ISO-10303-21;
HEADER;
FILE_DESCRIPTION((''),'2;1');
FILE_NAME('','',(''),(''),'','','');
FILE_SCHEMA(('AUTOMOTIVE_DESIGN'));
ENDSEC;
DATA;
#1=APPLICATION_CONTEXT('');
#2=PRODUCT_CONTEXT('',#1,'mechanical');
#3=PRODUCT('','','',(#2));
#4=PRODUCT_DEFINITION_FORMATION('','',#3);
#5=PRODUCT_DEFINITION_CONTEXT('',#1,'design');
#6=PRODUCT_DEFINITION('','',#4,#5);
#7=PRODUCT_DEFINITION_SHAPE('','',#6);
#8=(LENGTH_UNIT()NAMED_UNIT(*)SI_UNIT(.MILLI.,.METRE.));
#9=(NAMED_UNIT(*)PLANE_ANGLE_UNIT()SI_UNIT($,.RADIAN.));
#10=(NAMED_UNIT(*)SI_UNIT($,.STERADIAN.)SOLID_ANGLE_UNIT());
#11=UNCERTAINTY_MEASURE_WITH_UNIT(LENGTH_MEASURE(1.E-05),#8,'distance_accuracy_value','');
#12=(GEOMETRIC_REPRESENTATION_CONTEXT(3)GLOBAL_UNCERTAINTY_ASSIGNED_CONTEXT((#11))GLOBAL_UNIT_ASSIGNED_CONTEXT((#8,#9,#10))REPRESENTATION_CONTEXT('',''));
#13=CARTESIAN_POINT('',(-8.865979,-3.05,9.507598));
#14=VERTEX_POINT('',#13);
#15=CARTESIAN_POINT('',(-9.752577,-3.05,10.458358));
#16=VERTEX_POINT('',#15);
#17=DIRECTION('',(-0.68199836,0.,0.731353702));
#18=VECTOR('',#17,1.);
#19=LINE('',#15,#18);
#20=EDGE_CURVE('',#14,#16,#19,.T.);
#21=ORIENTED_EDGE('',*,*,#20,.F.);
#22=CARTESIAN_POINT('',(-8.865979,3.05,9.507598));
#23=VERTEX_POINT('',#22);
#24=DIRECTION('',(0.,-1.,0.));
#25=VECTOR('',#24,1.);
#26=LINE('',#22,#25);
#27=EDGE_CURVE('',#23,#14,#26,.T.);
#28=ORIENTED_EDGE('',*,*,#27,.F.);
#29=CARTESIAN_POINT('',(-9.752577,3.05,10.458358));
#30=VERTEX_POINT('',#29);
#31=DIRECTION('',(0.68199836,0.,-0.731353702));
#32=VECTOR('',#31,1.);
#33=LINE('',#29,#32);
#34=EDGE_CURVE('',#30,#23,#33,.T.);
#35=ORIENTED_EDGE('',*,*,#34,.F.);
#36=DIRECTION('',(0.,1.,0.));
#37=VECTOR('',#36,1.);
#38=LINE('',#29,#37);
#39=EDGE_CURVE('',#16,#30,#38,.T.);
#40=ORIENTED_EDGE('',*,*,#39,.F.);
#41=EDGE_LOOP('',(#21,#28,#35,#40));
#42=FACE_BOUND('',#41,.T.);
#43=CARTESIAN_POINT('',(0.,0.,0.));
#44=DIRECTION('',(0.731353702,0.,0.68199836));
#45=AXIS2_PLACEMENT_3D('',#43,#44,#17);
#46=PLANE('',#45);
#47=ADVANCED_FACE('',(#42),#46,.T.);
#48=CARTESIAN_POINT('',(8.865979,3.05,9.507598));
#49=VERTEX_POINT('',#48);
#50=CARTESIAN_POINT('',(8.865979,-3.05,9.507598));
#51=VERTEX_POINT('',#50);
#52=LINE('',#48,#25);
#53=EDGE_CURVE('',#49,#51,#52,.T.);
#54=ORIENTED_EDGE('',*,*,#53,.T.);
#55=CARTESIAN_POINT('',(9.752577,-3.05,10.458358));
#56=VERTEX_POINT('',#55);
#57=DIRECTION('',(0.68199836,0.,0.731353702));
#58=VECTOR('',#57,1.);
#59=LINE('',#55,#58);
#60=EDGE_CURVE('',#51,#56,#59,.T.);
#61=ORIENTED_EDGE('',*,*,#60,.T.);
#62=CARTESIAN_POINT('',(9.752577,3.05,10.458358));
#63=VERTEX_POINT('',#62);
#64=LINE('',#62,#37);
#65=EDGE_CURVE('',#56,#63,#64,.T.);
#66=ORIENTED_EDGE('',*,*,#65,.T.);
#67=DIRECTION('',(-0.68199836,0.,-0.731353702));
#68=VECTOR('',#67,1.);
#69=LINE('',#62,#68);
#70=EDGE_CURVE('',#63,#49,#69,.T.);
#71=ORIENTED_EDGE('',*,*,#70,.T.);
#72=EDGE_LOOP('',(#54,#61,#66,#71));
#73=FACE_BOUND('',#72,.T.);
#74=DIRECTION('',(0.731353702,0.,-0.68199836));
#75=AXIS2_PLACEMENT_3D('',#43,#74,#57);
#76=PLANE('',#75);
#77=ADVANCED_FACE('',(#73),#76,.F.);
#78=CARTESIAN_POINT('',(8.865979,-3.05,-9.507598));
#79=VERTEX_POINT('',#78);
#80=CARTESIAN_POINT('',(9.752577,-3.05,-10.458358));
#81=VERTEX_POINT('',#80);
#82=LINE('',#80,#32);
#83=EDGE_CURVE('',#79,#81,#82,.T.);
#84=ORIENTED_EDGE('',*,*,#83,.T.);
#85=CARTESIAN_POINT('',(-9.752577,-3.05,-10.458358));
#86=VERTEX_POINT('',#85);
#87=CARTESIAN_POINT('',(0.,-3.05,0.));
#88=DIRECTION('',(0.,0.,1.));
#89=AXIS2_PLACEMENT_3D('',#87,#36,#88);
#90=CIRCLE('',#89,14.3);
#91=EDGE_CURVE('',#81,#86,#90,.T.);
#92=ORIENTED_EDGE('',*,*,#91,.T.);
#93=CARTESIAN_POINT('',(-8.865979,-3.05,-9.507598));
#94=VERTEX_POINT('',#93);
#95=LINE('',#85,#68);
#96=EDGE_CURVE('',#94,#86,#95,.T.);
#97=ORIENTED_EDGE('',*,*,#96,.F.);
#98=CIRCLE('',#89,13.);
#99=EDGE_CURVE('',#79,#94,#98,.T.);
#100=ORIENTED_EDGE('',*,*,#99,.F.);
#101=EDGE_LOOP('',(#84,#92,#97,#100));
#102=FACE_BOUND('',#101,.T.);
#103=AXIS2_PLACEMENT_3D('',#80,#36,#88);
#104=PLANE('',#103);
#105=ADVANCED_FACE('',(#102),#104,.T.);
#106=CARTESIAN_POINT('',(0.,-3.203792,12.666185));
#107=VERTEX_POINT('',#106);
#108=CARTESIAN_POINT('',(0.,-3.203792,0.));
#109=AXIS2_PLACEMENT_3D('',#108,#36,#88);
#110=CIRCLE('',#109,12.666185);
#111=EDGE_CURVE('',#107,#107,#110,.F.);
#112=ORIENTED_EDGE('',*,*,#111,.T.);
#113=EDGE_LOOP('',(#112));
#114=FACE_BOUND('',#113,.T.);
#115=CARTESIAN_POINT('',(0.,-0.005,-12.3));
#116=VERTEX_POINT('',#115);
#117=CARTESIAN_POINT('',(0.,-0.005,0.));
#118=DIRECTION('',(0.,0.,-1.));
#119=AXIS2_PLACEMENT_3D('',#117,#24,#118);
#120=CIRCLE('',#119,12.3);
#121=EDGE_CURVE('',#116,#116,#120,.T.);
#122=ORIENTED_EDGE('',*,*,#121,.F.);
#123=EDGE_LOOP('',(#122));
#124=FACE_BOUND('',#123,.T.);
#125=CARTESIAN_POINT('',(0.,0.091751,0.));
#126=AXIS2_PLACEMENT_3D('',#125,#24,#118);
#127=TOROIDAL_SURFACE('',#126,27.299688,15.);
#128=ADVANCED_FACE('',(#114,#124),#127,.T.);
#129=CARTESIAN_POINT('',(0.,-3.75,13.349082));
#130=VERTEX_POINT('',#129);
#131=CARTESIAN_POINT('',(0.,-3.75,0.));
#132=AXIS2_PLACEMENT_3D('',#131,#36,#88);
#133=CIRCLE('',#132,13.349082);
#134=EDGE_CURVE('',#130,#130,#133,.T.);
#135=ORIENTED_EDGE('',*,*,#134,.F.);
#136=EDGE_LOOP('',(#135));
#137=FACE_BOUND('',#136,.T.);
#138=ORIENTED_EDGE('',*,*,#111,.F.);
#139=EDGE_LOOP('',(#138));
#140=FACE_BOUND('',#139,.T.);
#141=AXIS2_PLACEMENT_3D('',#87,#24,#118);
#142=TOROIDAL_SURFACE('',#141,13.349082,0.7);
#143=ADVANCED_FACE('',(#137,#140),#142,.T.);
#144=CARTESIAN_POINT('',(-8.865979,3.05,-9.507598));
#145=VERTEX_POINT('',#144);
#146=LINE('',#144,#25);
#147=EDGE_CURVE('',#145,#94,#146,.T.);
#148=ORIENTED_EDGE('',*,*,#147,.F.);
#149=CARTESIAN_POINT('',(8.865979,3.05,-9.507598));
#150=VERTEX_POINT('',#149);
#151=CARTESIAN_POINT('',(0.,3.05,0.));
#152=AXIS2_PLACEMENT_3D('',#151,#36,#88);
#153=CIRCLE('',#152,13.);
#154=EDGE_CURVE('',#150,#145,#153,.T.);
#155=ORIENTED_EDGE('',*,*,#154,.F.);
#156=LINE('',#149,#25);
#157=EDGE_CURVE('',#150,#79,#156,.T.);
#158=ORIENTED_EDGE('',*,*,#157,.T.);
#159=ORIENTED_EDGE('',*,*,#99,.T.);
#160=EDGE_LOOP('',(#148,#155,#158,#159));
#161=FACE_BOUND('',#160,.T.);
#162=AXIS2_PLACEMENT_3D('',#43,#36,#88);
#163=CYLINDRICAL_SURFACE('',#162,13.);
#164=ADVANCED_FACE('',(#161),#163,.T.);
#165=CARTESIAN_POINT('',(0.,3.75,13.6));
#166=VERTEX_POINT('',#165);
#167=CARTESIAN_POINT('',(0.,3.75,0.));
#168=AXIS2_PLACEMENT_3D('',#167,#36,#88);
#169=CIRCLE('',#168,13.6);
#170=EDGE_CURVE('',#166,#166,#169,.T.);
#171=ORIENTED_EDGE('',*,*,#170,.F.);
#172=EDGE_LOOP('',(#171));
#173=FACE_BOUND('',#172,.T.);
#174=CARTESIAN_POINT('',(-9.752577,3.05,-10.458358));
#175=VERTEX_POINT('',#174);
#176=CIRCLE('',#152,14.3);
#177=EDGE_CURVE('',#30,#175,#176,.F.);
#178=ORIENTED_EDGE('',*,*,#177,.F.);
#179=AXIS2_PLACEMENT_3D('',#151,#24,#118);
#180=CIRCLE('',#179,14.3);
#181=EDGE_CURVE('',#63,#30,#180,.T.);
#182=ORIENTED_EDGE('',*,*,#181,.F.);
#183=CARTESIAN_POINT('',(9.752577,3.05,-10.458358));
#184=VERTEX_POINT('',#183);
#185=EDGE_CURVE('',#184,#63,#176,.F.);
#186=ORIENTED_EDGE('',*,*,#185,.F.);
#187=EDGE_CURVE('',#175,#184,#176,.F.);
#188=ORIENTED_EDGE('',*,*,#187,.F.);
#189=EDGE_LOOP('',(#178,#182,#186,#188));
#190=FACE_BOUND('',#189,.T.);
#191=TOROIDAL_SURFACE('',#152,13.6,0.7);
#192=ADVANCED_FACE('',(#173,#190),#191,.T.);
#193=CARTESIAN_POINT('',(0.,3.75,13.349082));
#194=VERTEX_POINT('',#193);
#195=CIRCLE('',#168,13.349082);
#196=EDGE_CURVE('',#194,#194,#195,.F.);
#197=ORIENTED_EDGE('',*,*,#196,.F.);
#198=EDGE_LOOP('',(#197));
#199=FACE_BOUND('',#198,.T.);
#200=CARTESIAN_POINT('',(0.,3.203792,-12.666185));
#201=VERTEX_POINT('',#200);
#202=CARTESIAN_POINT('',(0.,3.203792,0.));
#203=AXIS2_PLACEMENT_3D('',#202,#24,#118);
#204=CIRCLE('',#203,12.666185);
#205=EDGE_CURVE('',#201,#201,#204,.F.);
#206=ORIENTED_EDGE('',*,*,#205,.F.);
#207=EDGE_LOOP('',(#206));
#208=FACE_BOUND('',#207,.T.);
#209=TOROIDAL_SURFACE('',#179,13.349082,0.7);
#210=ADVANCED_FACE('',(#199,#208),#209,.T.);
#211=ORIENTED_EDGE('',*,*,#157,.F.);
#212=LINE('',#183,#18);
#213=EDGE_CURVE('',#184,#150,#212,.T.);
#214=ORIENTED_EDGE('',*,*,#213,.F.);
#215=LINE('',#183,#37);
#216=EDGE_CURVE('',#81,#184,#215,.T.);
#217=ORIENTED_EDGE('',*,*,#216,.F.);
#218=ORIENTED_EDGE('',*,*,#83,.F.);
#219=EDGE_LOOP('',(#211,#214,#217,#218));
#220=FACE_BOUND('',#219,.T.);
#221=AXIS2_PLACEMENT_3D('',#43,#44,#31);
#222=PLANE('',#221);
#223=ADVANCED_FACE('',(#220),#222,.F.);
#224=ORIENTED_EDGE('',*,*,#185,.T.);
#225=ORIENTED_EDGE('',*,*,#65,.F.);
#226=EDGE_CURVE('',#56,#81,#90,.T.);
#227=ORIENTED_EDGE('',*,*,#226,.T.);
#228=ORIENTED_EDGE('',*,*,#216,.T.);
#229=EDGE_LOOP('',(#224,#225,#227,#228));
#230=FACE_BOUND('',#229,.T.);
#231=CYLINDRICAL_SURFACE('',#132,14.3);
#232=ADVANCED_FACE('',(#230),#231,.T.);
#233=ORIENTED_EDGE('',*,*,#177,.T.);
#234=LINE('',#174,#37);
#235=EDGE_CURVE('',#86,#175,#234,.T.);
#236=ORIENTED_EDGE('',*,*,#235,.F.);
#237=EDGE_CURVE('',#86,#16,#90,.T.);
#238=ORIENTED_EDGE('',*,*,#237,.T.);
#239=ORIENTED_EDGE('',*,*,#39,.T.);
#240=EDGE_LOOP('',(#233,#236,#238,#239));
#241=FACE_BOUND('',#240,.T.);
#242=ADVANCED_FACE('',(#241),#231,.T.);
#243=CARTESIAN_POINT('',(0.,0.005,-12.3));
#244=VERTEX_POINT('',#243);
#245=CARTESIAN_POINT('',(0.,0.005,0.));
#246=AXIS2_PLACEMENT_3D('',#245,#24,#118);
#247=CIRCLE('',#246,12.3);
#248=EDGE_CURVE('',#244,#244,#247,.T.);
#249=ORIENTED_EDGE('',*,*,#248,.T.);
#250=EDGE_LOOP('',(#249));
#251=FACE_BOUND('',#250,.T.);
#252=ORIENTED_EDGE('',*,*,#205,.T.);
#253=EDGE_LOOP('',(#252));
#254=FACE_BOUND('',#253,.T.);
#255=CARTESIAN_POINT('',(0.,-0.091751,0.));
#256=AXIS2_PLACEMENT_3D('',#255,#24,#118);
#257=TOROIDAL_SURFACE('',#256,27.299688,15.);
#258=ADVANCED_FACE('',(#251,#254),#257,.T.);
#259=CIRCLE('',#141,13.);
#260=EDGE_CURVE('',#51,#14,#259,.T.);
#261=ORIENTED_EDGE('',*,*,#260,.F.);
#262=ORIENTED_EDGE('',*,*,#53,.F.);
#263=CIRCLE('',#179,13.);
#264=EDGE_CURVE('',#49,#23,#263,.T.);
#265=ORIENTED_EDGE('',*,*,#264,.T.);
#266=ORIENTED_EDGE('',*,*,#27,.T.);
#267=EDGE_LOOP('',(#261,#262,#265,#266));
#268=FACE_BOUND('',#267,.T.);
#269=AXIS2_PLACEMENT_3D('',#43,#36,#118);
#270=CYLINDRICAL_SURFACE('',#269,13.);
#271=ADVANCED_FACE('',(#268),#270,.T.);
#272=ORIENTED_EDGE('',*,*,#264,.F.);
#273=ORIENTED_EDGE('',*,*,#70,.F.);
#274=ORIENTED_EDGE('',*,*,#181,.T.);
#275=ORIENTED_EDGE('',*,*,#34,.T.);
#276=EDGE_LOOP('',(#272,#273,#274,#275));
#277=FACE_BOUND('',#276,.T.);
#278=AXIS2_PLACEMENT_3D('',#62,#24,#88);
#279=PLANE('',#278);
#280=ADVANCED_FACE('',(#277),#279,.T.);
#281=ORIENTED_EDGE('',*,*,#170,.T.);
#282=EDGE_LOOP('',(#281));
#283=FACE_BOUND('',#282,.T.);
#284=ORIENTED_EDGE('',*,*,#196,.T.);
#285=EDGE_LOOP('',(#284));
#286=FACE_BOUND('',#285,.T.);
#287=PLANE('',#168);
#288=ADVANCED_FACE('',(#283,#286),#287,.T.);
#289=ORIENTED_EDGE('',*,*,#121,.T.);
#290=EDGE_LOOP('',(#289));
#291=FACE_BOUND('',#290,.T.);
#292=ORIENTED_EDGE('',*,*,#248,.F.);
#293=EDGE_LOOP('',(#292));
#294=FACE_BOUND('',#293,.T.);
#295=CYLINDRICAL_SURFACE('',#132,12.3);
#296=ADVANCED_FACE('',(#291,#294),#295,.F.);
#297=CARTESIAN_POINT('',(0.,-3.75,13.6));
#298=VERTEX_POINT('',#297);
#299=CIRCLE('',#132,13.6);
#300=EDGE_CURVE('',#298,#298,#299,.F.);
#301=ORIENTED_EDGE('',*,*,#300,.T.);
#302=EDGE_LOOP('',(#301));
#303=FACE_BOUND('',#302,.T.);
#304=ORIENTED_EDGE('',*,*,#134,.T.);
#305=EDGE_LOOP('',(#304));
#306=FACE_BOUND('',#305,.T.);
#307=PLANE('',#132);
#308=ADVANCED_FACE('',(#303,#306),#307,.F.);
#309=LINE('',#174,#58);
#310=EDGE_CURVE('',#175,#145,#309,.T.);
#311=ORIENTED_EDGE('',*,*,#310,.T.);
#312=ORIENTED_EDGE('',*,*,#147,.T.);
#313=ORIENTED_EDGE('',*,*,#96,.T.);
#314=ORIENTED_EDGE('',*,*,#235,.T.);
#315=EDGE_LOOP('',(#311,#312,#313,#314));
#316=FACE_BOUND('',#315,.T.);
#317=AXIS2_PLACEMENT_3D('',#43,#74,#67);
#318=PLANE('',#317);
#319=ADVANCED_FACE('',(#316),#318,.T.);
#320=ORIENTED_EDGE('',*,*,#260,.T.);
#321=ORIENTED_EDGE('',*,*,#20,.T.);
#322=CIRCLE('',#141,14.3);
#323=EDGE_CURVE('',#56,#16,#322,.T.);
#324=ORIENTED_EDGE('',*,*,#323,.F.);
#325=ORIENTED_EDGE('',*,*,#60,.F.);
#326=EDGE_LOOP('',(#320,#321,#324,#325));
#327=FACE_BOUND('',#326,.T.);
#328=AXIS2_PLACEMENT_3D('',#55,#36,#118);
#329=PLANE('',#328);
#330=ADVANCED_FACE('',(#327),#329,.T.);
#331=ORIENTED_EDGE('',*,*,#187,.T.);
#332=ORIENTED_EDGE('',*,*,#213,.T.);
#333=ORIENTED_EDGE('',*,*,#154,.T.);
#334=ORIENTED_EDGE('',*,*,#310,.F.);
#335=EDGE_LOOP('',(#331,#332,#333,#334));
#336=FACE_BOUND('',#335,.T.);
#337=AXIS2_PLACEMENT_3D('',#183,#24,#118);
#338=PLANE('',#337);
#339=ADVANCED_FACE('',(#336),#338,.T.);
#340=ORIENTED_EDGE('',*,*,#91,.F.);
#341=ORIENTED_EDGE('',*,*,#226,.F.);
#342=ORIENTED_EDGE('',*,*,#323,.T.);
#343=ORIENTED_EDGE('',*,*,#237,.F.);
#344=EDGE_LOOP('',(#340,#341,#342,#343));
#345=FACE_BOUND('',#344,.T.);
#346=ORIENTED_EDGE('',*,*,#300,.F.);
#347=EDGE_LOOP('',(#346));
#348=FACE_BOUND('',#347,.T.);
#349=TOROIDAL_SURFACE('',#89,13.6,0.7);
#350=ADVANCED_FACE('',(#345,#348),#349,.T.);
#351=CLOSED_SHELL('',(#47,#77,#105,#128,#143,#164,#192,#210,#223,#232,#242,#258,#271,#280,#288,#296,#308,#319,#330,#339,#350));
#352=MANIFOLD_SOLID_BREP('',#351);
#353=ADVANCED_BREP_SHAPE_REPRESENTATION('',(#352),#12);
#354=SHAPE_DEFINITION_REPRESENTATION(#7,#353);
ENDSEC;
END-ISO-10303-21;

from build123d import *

# Parameters (mm, degrees)
BOSS_EXTRUDE1_DEPTH      = 3.75
BOSS_EXTRUDE1_DEPTH_BACK = 3.75
SKETCH1_R                = 14.3
SKETCH1_R_2              = 12.3
FILLET1_R                = 0.7
FILLET3_R                = 0.7
CUT_REVOLVE2_START       = -3.05
CUT_REVOLVE2_DEPTH       = 6.1


# Read off the part's stored shape, not the designer's step: Cut-Revolve2
with BuildPart() as part:
    # Sketch1 → Boss-Extrude1 (new, two sides: drawn at the far end of the back side and taken through both)
    with BuildSketch(Plane(origin=(0, 0, 0), x_dir=(1, 0, 0), z_dir=(0, 1, 0)).offset(-BOSS_EXTRUDE1_DEPTH_BACK)):
        with Locations(Location((0, 0, 0), (0, 0, 270))):
            Circle(SKETCH1_R)
        with Locations(Location((0, 0, 0), (0, 0, 270))):
            Circle(SKETCH1_R_2, mode=Mode.SUBTRACT)
    extrude(amount=BOSS_EXTRUDE1_DEPTH + BOSS_EXTRUDE1_DEPTH_BACK)

    # Fillet1
    fillet1_edges = [part.edges().sort_by_distance(p)[0] for p in [
        (0, -3.75, -14.3),
        (0, 3.75, -14.3),
    ]]
    fillet(fillet1_edges, radius=FILLET1_R)

    # Sketch3 → Cut-Revolve1 (revolve, cut)
    with BuildSketch(Plane(origin=(0, 0, 0), x_dir=(0, 0, -1), z_dir=(1, 0, 0)), mode=Mode.PRIVATE) as cut_revolve1_sk:
        with BuildLine():
            Line((-12.3, 3.75), (-12.3, 0.005))
            ThreePointArc((-12.3, 0.005), (-12.431616425, 1.893305551), (-12.8, 3.75))
            Line((-12.8, 3.75), (-12.3, 3.75))
        make_face()
        with BuildLine():
            Line((-12.3, -3.75), (-12.8, -3.75))
            ThreePointArc((-12.8, -3.75), (-12.431616425, -1.893305551), (-12.3, -0.005))
            Line((-12.3, -0.005), (-12.3, -3.75))
        make_face()
    revolve(cut_revolve1_sk.sketch.rotate(Axis((0, 0, 0), (0, 1, 0)), 180), axis=Axis((0, 0, 0), (0, 1, 0)), mode=Mode.SUBTRACT)

    # Fillet3
    fillet3_edges = [part.edges().sort_by_distance(p)[0] for p in [
        (0, 3.75, 12.8),
        (0, -3.75, 12.8),
    ]]
    fillet(fillet3_edges, radius=FILLET3_R)

    # Cut-Revolve2 outline → Cut-Revolve2 (cut)
    with BuildSketch(Plane(origin=(0, 0, 0), x_dir=(1, 0, 0), z_dir=(0, 1, 0)).offset(CUT_REVOLVE2_START)):
        with BuildLine():
            ThreePointArc((-8.865978681, 9.507598121), (0, 13), (8.865978681, 9.507598121))
            Line((8.865978681, 9.507598121), (9.752576549, 10.458357933))
            ThreePointArc((9.752576549, 10.458357933), (0, 14.3), (-9.752576549, 10.458357933))
            Line((-9.752576549, 10.458357933), (-8.865978681, 9.507598121))
        make_face()
    cut_revolve2 = extrude(amount=CUT_REVOLVE2_DEPTH, mode=Mode.SUBTRACT)

    # Mirror3: Cut-Revolve2 across plane
    add(cut_revolve2.mirror(Plane.XY), mode=Mode.SUBTRACT)


solid = part.part
